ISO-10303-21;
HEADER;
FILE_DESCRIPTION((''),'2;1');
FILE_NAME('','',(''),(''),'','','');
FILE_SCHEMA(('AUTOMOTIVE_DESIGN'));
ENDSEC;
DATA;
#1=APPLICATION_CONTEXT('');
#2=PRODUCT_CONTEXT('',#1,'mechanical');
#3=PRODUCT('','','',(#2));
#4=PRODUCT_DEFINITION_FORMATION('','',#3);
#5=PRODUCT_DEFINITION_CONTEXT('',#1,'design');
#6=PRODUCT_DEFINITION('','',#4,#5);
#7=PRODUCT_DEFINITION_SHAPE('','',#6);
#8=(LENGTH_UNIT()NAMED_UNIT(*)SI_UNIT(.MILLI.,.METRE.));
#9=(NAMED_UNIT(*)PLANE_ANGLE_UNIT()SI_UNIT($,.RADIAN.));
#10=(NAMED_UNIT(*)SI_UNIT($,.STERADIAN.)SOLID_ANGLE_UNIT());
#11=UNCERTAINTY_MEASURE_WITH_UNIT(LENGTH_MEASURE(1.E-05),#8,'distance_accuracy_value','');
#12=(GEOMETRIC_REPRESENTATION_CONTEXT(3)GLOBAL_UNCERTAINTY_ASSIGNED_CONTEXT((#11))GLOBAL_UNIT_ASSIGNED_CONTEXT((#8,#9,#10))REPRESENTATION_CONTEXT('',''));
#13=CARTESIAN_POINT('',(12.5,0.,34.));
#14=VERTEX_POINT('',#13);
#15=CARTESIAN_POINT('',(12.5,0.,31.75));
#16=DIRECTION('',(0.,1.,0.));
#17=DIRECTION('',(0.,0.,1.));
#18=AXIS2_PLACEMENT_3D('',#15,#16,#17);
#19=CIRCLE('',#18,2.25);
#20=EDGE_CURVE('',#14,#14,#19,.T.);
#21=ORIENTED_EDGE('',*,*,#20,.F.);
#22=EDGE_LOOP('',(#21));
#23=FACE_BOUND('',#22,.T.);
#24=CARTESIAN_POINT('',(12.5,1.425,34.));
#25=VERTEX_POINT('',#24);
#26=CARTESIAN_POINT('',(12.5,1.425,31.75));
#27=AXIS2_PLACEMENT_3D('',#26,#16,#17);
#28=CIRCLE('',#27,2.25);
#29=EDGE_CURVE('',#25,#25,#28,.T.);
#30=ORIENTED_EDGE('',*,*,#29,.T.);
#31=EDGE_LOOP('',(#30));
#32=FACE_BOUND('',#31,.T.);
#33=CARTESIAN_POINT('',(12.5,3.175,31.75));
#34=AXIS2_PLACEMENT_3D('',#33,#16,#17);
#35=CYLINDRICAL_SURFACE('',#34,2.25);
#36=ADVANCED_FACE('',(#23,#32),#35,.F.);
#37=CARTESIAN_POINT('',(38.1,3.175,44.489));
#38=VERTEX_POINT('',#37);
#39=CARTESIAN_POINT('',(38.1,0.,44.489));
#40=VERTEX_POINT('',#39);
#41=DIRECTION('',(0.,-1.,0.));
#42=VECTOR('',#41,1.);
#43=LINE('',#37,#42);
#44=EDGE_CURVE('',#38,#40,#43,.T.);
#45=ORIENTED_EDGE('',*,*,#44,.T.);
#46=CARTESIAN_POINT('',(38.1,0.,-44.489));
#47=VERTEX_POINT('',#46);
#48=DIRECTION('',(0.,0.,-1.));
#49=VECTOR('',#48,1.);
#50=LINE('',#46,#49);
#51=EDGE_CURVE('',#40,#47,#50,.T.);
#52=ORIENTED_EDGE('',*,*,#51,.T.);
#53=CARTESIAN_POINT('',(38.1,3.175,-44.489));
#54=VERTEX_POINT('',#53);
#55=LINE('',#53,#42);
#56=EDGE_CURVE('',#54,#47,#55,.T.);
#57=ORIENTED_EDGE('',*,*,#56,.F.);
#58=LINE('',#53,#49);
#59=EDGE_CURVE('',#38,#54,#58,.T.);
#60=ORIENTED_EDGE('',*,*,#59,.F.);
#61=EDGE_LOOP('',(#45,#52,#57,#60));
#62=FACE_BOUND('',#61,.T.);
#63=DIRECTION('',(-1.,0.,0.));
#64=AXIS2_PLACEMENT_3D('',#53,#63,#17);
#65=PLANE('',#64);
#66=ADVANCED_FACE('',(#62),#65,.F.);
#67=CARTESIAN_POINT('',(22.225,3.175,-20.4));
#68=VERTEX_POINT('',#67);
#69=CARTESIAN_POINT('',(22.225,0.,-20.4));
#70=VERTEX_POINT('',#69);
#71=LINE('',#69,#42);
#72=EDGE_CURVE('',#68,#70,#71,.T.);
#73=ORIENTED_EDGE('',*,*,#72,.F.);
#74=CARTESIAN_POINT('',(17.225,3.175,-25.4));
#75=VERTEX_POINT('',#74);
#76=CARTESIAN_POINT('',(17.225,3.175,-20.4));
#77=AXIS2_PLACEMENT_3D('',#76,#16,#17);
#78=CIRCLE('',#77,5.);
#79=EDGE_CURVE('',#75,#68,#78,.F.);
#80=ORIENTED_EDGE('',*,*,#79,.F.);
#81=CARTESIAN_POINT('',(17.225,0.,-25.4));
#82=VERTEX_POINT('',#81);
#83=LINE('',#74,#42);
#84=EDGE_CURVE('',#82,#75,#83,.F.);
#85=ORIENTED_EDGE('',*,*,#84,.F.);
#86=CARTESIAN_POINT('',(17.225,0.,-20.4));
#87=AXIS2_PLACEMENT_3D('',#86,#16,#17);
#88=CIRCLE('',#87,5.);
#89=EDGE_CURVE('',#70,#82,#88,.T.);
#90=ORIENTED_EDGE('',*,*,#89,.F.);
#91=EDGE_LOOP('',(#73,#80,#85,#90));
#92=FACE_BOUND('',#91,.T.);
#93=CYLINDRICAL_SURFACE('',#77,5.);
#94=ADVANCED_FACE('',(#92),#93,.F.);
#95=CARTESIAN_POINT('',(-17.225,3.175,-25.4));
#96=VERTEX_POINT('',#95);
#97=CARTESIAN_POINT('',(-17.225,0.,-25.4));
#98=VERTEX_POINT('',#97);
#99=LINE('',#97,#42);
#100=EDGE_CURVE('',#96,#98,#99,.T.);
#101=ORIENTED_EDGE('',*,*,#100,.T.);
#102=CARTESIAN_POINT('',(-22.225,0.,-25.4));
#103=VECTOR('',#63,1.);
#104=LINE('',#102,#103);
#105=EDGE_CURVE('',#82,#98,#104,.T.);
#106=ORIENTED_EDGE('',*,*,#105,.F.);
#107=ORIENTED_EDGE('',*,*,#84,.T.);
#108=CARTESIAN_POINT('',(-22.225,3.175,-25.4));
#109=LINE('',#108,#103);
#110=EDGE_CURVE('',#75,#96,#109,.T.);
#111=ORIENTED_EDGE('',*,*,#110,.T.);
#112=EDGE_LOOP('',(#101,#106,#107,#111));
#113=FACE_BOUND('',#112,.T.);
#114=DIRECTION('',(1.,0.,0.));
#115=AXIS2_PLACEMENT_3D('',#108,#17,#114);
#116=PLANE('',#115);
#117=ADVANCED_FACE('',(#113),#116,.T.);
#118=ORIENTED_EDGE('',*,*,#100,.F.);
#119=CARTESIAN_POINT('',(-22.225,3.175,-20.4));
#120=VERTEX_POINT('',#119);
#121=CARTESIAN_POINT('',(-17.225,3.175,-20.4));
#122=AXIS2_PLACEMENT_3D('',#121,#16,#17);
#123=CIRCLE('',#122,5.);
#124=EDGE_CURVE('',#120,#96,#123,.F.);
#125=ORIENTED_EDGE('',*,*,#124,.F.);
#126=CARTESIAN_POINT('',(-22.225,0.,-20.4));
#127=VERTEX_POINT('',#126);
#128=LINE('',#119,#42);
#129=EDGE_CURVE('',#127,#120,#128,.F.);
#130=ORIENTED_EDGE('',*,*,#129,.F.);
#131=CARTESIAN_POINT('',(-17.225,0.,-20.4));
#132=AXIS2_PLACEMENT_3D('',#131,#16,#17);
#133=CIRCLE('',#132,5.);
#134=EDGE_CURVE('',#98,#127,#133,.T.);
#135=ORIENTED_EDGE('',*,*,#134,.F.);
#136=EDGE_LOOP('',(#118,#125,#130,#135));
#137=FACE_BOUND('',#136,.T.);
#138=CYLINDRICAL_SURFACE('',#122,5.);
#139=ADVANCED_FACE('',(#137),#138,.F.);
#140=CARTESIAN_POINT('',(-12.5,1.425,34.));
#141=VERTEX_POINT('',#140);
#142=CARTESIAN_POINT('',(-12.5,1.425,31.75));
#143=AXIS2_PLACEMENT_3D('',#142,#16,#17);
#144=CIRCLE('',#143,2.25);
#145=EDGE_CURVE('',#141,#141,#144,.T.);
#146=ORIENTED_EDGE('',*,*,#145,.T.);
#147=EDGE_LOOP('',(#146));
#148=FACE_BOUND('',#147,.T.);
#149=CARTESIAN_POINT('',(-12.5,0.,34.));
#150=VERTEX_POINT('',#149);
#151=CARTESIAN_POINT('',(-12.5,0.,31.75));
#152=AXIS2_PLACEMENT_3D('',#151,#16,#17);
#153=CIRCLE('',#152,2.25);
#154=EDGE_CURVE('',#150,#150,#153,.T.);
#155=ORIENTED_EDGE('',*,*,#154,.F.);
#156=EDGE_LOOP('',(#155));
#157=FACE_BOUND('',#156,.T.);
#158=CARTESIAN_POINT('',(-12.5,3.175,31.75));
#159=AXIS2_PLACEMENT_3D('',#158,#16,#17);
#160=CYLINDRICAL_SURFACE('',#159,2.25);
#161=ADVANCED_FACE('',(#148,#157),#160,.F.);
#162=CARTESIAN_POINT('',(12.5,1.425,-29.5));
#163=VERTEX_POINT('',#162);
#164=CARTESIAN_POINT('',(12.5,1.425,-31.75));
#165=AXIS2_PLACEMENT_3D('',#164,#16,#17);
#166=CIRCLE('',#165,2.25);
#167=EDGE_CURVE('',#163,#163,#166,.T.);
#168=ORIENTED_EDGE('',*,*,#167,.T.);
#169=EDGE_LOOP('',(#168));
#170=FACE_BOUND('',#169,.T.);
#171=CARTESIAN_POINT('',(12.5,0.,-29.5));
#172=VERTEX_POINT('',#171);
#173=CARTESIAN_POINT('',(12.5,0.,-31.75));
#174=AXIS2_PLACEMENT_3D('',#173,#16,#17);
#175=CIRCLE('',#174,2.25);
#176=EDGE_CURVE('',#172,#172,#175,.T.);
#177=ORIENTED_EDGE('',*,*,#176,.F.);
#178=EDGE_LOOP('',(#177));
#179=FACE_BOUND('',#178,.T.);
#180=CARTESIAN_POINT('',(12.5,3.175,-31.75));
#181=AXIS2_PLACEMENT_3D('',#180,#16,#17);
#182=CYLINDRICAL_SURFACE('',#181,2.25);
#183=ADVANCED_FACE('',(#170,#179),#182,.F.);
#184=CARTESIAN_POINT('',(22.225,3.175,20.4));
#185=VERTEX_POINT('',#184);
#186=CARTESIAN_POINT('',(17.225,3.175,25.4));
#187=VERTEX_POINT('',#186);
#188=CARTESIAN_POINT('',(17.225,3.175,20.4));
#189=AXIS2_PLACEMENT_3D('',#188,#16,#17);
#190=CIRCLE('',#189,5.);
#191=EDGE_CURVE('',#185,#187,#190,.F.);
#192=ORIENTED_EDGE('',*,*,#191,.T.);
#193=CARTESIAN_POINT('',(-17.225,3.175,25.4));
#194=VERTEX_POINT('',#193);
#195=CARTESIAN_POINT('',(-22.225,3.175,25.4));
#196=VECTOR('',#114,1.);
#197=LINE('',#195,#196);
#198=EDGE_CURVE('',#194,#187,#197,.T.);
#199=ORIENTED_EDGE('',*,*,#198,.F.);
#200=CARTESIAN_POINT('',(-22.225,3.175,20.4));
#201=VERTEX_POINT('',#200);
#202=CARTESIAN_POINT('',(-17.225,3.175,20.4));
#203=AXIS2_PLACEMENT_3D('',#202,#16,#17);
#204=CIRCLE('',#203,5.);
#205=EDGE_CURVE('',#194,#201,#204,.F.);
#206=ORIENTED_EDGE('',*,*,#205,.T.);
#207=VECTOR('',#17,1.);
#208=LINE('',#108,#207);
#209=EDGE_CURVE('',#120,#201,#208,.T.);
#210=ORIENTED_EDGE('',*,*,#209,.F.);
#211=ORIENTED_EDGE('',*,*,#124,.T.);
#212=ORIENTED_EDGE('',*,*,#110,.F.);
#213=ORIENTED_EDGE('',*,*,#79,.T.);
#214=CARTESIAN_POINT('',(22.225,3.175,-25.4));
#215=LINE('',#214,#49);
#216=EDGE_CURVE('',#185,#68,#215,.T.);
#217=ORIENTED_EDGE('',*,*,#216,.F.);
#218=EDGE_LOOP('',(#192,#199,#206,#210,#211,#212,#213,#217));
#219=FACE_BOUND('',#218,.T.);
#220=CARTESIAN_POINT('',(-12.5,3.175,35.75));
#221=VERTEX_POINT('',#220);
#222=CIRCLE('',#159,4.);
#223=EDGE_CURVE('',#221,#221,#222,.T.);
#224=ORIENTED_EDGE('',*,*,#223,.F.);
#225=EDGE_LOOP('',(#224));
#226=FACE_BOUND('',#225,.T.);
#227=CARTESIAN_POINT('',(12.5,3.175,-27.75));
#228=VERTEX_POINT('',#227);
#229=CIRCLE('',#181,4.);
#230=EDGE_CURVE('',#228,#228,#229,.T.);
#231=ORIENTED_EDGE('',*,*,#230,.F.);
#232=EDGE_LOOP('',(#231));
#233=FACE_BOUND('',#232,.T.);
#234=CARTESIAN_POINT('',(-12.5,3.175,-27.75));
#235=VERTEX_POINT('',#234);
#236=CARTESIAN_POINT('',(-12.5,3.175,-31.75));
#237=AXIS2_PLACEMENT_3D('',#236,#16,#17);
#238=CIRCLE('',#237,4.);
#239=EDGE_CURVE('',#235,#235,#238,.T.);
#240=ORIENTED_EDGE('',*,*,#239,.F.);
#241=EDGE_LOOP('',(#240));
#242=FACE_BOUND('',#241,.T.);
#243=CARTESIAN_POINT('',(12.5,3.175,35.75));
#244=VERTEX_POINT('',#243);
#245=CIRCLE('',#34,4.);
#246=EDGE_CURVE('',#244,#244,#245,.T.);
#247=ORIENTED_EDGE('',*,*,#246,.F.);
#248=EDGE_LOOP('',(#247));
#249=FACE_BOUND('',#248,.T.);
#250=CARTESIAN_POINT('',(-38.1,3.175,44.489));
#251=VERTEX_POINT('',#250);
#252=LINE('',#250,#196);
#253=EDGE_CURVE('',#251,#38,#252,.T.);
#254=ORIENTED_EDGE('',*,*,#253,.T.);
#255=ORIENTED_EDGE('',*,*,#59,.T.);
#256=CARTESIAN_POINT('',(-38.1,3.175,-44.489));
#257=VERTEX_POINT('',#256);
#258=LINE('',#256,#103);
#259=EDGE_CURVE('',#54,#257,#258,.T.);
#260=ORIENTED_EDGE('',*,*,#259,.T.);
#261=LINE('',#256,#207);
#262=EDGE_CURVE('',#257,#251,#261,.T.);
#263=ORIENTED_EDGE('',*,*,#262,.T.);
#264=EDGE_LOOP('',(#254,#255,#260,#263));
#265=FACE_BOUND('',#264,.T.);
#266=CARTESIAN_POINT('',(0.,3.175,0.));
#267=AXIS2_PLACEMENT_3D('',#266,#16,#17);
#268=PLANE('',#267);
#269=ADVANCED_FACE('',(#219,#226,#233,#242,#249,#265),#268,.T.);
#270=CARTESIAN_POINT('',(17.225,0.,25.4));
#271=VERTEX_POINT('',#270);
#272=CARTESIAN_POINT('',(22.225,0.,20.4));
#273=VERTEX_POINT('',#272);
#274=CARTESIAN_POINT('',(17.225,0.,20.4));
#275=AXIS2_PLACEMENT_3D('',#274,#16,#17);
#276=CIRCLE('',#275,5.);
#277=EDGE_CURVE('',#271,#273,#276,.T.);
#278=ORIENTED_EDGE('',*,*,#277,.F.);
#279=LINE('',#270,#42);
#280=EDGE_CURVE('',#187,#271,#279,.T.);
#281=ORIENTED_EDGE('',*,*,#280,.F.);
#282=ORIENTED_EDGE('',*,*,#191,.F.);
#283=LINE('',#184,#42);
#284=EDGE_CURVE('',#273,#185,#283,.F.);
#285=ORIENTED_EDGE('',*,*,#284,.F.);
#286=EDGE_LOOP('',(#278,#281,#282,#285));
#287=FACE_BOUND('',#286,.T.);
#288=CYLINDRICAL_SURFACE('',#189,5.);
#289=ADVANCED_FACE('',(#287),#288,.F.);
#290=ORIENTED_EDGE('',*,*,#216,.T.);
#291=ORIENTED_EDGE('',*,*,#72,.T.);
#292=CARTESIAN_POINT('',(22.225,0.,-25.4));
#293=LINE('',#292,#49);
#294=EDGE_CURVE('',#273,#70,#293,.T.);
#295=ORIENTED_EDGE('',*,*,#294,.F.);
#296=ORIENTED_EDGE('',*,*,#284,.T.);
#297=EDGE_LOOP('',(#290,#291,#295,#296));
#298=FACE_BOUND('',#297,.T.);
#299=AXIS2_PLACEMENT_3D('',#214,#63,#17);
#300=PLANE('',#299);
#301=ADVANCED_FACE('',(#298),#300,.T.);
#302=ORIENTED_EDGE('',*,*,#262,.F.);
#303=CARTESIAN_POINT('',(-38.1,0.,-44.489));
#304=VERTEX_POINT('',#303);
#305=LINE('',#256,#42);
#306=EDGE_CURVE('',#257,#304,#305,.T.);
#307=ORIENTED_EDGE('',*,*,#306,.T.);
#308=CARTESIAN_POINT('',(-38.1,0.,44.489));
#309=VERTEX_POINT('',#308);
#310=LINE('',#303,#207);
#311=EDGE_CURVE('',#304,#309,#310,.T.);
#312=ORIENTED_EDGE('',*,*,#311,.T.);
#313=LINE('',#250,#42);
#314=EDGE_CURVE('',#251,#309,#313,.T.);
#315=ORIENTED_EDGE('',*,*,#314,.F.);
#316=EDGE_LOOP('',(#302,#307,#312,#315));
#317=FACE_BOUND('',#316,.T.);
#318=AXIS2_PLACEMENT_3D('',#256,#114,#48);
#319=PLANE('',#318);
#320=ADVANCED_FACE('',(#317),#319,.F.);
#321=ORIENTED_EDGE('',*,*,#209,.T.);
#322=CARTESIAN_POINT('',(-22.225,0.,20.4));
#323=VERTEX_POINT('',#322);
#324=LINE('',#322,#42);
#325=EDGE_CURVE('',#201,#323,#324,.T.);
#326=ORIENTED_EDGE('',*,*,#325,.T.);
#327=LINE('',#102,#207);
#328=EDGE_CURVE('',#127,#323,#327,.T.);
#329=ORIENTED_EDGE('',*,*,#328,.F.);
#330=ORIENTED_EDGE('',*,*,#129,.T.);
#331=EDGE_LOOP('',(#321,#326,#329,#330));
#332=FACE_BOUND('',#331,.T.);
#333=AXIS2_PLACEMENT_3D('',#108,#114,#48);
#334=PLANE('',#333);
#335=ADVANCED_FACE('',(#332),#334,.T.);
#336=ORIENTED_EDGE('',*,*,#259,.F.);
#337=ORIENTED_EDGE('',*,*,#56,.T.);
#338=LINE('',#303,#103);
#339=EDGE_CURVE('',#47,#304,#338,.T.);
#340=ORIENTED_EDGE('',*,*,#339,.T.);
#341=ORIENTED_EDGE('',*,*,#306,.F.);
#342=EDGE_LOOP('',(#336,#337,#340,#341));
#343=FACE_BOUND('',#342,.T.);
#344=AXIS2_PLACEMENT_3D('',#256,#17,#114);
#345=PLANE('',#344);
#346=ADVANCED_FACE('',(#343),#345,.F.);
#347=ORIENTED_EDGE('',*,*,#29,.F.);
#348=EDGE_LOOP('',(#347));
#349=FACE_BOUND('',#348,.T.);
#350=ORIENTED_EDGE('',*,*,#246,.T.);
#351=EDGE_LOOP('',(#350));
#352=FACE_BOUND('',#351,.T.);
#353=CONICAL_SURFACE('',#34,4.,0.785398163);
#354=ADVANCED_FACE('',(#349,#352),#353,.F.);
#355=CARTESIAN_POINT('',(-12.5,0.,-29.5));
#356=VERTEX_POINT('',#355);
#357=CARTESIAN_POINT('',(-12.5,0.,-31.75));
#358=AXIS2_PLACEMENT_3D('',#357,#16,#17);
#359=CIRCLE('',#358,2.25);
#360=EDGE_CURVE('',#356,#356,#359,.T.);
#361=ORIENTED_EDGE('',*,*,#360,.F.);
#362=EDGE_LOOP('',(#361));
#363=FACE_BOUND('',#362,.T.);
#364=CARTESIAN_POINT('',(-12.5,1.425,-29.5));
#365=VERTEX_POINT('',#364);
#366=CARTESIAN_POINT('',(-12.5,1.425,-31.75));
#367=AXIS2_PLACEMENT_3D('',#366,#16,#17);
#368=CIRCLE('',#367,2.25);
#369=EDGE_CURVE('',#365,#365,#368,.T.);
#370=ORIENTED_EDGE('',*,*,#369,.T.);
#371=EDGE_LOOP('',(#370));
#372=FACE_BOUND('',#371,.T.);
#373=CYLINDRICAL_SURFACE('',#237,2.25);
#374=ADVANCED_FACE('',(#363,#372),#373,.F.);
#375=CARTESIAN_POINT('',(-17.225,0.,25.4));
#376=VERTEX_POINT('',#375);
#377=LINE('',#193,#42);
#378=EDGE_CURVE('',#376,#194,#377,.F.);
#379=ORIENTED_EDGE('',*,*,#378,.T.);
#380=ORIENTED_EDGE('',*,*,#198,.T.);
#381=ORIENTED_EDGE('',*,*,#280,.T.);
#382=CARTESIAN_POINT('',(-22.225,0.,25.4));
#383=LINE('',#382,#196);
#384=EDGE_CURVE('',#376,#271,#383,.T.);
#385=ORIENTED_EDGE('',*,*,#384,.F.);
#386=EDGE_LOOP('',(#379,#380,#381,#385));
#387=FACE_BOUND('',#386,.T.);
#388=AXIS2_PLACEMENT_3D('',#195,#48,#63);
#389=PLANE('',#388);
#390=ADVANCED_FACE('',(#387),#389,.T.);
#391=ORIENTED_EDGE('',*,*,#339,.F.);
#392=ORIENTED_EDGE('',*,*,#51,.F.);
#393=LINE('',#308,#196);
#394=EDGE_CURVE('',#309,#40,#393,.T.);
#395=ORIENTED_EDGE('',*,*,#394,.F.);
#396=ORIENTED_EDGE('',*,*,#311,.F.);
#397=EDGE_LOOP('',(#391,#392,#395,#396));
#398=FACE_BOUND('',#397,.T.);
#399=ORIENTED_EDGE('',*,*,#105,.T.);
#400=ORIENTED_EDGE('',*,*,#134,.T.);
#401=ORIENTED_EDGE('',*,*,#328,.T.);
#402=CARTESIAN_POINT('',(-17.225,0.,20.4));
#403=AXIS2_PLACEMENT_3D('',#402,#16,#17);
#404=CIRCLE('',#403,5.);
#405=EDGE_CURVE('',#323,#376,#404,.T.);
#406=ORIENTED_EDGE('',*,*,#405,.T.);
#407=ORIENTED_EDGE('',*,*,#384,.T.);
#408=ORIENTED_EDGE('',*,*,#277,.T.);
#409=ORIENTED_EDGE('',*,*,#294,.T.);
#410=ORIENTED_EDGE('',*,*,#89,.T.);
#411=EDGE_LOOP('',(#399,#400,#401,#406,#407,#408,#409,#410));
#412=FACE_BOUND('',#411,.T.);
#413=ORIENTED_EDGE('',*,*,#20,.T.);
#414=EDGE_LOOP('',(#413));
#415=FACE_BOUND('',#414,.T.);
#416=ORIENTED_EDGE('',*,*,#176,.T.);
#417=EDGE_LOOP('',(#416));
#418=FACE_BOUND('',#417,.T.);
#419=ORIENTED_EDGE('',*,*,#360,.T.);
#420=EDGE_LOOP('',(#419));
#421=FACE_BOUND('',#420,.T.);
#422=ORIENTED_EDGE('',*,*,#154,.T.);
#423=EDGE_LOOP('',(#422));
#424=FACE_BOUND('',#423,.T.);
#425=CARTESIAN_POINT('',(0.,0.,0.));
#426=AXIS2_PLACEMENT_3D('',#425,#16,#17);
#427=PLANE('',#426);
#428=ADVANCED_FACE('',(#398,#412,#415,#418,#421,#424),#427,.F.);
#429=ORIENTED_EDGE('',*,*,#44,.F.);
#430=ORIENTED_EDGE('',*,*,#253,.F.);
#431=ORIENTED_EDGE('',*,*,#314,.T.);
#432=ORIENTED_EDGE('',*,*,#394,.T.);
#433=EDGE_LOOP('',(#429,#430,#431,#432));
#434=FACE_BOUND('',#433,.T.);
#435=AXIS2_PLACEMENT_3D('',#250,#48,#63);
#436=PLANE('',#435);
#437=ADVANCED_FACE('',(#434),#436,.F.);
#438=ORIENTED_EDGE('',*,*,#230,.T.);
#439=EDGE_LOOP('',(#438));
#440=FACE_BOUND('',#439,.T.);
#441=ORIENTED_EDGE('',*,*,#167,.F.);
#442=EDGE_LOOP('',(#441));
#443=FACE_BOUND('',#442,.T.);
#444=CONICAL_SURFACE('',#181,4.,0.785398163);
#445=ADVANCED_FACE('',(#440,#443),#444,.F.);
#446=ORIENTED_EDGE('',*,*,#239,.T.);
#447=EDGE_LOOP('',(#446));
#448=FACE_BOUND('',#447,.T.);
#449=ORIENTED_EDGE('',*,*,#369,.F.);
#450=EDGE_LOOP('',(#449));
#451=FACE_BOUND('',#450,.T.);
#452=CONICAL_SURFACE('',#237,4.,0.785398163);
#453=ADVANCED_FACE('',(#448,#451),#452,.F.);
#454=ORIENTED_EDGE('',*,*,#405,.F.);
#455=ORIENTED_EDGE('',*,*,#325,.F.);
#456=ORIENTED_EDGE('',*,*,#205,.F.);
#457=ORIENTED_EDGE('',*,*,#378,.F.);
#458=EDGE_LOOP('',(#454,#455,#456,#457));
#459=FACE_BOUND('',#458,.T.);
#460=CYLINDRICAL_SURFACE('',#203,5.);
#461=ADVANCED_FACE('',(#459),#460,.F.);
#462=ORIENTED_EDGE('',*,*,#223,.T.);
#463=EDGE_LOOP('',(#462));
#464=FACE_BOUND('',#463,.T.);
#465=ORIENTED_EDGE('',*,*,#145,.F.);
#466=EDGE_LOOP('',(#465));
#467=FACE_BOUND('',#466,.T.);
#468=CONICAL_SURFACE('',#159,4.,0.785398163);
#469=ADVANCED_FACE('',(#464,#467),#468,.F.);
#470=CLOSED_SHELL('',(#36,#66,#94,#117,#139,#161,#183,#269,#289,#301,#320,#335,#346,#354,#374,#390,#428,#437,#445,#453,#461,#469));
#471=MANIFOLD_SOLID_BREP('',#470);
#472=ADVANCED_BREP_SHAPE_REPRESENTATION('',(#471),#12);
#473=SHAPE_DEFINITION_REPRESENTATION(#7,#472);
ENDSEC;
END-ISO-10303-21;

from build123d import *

# Parameters (mm, degrees)
SKETCH1_W           = 76.2
SKETCH1_H           = 88.978
SKETCH1_W_2         = 44.45
SKETCH1_H_2         = 50.8
BOSS_EXTRUDE1_DEPTH = 3.175
FILLET1_R           = 5


# Read off the part's stored shape, not the designer's step: AdvancedHole1
with BuildPart() as part:
    # Sketch1 → Boss-Extrude1 (new body)
    with BuildSketch(Plane(origin=(0, 0, 0), x_dir=(1, 0, 0), z_dir=(0, 1, 0))):
        Rectangle(SKETCH1_W, SKETCH1_H)
        Rectangle(SKETCH1_W_2, SKETCH1_H_2, mode=Mode.SUBTRACT)
    extrude(amount=BOSS_EXTRUDE1_DEPTH)

    # AdvancedHole1 outline → AdvancedHole1 (revolve, cut)
    with BuildSketch(Plane(origin=(12.5, 0, -31.75), x_dir=(1, 0, 0), z_dir=(0, 0, 1))):
        Polygon((4, 3.175), (0, 3.175), (0, 0), (2.25, 0), (2.25, 1.425), align=None)
    advancedhole1 = revolve(axis=Axis((12.5, 0, -31.75), (0, 1, 0)), mode=Mode.SUBTRACT)

    # AdvancedHole1 2 outline → AdvancedHole1 2 (revolve, cut)
    with BuildSketch(Plane(origin=(-12.5, 0, -31.75), x_dir=(1, 0, 0), z_dir=(0, 0, 1))):
        Polygon((4, 3.175), (0, 3.175), (0, 0), (2.25, 0), (2.25, 1.425), align=None)
    advancedhole1_2 = revolve(axis=Axis((-12.5, 0, -31.75), (0, 1, 0)), mode=Mode.SUBTRACT)

    # Mirror1: AdvancedHole1, AdvancedHole1 2 across plane
    add(advancedhole1.mirror(Plane.XY), mode=Mode.SUBTRACT)
    add(advancedhole1_2.mirror(Plane.XY), mode=Mode.SUBTRACT)

    # Fillet1
    fillet1_edges = [part.edges().sort_by_distance(p)[0] for p in [
        (-22.225, 1.5875, -25.4),
        (-22.225, 1.5875, 25.4),
        (22.225, 1.5875, 25.4),
        (22.225, 1.5875, -25.4),
    ]]
    fillet(fillet1_edges, radius=FILLET1_R)


solid = part.part
